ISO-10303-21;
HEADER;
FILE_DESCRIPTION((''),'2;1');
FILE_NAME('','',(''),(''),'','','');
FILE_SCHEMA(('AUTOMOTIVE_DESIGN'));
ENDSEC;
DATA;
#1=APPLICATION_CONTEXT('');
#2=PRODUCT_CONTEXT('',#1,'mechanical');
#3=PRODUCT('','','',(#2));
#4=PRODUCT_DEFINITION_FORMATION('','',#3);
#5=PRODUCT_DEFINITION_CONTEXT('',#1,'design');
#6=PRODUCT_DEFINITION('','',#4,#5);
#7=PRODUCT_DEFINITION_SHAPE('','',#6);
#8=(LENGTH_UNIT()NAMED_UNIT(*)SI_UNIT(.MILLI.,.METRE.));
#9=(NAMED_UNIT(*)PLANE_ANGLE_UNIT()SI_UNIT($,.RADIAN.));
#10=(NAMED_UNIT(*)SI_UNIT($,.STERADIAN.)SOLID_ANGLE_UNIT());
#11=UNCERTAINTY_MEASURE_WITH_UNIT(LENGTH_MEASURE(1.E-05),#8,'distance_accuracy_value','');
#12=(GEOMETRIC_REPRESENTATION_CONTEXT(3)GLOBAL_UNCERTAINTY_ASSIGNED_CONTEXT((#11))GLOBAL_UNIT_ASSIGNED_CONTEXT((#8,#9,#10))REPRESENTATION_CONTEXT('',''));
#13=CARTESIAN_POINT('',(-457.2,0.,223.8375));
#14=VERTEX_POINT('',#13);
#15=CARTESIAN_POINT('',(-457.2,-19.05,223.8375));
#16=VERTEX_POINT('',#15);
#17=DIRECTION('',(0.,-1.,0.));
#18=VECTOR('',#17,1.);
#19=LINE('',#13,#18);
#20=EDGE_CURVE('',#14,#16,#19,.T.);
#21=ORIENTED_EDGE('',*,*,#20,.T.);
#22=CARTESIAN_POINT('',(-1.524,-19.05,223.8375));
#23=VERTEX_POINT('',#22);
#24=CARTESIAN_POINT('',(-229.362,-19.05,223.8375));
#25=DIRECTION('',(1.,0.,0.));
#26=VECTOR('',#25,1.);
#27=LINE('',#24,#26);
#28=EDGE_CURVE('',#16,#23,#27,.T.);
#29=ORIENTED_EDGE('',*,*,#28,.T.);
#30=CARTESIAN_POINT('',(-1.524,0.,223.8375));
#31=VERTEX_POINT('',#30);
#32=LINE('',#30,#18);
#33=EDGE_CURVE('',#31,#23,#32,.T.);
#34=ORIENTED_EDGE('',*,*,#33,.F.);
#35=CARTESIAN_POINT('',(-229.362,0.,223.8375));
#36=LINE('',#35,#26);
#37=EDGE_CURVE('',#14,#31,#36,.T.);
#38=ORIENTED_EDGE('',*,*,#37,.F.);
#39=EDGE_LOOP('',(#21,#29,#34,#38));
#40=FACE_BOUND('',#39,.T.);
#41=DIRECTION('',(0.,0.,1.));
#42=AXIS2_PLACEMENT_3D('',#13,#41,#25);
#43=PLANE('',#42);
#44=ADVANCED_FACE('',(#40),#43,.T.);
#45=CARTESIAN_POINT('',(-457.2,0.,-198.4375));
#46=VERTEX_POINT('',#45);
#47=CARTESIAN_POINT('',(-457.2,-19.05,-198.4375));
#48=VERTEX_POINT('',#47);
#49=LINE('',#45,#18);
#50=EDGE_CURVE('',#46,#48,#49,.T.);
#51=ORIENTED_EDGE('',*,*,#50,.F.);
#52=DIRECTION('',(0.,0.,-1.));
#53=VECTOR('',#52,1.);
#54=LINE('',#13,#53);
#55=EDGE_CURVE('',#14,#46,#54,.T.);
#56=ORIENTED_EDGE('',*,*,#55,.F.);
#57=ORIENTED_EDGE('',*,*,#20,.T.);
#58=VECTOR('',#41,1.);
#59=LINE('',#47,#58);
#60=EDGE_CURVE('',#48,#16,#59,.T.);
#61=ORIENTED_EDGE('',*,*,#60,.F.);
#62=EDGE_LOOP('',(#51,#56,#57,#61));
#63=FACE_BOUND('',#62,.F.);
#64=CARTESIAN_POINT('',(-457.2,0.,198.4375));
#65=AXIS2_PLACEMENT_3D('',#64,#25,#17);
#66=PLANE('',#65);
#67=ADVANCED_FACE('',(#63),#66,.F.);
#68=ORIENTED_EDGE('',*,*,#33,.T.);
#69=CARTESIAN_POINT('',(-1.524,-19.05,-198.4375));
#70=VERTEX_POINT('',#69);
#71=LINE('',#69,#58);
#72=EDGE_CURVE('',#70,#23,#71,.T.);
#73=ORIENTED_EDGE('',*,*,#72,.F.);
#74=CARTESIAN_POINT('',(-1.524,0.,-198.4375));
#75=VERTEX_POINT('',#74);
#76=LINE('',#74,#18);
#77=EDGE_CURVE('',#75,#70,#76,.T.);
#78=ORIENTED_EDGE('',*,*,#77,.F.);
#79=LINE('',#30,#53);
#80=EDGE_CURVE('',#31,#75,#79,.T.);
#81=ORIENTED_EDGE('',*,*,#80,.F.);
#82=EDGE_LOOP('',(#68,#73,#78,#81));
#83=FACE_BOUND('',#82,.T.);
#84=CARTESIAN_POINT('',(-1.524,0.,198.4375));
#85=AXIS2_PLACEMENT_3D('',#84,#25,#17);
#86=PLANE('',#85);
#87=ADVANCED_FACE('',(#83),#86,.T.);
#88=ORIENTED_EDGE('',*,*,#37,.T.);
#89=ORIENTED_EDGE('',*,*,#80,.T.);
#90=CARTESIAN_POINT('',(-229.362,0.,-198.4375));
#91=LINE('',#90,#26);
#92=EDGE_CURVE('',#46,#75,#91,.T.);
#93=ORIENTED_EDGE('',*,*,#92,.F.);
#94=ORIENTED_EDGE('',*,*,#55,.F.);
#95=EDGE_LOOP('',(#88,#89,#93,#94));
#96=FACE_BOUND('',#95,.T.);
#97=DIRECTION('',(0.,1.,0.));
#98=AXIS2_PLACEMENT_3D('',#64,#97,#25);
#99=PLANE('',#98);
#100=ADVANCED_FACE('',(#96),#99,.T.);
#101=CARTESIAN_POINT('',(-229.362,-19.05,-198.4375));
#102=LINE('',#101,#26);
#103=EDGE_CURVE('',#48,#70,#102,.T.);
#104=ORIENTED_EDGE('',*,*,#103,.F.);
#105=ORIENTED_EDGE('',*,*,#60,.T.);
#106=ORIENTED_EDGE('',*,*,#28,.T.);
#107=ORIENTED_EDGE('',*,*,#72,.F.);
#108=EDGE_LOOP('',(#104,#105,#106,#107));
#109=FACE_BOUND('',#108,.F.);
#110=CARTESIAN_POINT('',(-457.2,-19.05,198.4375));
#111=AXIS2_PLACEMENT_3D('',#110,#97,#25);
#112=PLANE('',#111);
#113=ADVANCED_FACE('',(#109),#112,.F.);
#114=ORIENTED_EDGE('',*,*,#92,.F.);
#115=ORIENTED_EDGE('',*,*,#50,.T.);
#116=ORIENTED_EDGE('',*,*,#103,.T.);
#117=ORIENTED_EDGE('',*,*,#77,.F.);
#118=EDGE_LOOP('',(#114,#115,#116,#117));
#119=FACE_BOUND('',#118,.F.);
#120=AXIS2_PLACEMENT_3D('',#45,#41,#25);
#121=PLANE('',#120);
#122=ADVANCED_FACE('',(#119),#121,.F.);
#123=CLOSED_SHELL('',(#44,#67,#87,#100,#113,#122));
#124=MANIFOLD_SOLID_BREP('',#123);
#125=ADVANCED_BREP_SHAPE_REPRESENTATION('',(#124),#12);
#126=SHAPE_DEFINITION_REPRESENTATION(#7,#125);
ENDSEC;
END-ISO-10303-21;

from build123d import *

# Parameters (mm, degrees)
F0_W     = 455.676
F0_H     = 396.875
F1_DEPTH = 19.05
F2_DEPTH = 25.4


# Not quite as in the source:
# - a feature names something its author has since deleted; it is built from what else it names


with BuildPart() as f1:
    # F0 (on Front) → F1 (new body)
    with BuildSketch(Plane.XZ):
        with Locations((-229.362, 0)):
            Rectangle(F0_W, F0_H)
    extrude(amount=F1_DEPTH)

    # F2 (add): a face of the model
    f2_faces = [f1.faces().sort_by_distance(p)[0] for p in [
        (-229.362, -9.525, 198.4375),
    ]]
    extrude(f2_faces, amount=F2_DEPTH)


solid = f1.part
